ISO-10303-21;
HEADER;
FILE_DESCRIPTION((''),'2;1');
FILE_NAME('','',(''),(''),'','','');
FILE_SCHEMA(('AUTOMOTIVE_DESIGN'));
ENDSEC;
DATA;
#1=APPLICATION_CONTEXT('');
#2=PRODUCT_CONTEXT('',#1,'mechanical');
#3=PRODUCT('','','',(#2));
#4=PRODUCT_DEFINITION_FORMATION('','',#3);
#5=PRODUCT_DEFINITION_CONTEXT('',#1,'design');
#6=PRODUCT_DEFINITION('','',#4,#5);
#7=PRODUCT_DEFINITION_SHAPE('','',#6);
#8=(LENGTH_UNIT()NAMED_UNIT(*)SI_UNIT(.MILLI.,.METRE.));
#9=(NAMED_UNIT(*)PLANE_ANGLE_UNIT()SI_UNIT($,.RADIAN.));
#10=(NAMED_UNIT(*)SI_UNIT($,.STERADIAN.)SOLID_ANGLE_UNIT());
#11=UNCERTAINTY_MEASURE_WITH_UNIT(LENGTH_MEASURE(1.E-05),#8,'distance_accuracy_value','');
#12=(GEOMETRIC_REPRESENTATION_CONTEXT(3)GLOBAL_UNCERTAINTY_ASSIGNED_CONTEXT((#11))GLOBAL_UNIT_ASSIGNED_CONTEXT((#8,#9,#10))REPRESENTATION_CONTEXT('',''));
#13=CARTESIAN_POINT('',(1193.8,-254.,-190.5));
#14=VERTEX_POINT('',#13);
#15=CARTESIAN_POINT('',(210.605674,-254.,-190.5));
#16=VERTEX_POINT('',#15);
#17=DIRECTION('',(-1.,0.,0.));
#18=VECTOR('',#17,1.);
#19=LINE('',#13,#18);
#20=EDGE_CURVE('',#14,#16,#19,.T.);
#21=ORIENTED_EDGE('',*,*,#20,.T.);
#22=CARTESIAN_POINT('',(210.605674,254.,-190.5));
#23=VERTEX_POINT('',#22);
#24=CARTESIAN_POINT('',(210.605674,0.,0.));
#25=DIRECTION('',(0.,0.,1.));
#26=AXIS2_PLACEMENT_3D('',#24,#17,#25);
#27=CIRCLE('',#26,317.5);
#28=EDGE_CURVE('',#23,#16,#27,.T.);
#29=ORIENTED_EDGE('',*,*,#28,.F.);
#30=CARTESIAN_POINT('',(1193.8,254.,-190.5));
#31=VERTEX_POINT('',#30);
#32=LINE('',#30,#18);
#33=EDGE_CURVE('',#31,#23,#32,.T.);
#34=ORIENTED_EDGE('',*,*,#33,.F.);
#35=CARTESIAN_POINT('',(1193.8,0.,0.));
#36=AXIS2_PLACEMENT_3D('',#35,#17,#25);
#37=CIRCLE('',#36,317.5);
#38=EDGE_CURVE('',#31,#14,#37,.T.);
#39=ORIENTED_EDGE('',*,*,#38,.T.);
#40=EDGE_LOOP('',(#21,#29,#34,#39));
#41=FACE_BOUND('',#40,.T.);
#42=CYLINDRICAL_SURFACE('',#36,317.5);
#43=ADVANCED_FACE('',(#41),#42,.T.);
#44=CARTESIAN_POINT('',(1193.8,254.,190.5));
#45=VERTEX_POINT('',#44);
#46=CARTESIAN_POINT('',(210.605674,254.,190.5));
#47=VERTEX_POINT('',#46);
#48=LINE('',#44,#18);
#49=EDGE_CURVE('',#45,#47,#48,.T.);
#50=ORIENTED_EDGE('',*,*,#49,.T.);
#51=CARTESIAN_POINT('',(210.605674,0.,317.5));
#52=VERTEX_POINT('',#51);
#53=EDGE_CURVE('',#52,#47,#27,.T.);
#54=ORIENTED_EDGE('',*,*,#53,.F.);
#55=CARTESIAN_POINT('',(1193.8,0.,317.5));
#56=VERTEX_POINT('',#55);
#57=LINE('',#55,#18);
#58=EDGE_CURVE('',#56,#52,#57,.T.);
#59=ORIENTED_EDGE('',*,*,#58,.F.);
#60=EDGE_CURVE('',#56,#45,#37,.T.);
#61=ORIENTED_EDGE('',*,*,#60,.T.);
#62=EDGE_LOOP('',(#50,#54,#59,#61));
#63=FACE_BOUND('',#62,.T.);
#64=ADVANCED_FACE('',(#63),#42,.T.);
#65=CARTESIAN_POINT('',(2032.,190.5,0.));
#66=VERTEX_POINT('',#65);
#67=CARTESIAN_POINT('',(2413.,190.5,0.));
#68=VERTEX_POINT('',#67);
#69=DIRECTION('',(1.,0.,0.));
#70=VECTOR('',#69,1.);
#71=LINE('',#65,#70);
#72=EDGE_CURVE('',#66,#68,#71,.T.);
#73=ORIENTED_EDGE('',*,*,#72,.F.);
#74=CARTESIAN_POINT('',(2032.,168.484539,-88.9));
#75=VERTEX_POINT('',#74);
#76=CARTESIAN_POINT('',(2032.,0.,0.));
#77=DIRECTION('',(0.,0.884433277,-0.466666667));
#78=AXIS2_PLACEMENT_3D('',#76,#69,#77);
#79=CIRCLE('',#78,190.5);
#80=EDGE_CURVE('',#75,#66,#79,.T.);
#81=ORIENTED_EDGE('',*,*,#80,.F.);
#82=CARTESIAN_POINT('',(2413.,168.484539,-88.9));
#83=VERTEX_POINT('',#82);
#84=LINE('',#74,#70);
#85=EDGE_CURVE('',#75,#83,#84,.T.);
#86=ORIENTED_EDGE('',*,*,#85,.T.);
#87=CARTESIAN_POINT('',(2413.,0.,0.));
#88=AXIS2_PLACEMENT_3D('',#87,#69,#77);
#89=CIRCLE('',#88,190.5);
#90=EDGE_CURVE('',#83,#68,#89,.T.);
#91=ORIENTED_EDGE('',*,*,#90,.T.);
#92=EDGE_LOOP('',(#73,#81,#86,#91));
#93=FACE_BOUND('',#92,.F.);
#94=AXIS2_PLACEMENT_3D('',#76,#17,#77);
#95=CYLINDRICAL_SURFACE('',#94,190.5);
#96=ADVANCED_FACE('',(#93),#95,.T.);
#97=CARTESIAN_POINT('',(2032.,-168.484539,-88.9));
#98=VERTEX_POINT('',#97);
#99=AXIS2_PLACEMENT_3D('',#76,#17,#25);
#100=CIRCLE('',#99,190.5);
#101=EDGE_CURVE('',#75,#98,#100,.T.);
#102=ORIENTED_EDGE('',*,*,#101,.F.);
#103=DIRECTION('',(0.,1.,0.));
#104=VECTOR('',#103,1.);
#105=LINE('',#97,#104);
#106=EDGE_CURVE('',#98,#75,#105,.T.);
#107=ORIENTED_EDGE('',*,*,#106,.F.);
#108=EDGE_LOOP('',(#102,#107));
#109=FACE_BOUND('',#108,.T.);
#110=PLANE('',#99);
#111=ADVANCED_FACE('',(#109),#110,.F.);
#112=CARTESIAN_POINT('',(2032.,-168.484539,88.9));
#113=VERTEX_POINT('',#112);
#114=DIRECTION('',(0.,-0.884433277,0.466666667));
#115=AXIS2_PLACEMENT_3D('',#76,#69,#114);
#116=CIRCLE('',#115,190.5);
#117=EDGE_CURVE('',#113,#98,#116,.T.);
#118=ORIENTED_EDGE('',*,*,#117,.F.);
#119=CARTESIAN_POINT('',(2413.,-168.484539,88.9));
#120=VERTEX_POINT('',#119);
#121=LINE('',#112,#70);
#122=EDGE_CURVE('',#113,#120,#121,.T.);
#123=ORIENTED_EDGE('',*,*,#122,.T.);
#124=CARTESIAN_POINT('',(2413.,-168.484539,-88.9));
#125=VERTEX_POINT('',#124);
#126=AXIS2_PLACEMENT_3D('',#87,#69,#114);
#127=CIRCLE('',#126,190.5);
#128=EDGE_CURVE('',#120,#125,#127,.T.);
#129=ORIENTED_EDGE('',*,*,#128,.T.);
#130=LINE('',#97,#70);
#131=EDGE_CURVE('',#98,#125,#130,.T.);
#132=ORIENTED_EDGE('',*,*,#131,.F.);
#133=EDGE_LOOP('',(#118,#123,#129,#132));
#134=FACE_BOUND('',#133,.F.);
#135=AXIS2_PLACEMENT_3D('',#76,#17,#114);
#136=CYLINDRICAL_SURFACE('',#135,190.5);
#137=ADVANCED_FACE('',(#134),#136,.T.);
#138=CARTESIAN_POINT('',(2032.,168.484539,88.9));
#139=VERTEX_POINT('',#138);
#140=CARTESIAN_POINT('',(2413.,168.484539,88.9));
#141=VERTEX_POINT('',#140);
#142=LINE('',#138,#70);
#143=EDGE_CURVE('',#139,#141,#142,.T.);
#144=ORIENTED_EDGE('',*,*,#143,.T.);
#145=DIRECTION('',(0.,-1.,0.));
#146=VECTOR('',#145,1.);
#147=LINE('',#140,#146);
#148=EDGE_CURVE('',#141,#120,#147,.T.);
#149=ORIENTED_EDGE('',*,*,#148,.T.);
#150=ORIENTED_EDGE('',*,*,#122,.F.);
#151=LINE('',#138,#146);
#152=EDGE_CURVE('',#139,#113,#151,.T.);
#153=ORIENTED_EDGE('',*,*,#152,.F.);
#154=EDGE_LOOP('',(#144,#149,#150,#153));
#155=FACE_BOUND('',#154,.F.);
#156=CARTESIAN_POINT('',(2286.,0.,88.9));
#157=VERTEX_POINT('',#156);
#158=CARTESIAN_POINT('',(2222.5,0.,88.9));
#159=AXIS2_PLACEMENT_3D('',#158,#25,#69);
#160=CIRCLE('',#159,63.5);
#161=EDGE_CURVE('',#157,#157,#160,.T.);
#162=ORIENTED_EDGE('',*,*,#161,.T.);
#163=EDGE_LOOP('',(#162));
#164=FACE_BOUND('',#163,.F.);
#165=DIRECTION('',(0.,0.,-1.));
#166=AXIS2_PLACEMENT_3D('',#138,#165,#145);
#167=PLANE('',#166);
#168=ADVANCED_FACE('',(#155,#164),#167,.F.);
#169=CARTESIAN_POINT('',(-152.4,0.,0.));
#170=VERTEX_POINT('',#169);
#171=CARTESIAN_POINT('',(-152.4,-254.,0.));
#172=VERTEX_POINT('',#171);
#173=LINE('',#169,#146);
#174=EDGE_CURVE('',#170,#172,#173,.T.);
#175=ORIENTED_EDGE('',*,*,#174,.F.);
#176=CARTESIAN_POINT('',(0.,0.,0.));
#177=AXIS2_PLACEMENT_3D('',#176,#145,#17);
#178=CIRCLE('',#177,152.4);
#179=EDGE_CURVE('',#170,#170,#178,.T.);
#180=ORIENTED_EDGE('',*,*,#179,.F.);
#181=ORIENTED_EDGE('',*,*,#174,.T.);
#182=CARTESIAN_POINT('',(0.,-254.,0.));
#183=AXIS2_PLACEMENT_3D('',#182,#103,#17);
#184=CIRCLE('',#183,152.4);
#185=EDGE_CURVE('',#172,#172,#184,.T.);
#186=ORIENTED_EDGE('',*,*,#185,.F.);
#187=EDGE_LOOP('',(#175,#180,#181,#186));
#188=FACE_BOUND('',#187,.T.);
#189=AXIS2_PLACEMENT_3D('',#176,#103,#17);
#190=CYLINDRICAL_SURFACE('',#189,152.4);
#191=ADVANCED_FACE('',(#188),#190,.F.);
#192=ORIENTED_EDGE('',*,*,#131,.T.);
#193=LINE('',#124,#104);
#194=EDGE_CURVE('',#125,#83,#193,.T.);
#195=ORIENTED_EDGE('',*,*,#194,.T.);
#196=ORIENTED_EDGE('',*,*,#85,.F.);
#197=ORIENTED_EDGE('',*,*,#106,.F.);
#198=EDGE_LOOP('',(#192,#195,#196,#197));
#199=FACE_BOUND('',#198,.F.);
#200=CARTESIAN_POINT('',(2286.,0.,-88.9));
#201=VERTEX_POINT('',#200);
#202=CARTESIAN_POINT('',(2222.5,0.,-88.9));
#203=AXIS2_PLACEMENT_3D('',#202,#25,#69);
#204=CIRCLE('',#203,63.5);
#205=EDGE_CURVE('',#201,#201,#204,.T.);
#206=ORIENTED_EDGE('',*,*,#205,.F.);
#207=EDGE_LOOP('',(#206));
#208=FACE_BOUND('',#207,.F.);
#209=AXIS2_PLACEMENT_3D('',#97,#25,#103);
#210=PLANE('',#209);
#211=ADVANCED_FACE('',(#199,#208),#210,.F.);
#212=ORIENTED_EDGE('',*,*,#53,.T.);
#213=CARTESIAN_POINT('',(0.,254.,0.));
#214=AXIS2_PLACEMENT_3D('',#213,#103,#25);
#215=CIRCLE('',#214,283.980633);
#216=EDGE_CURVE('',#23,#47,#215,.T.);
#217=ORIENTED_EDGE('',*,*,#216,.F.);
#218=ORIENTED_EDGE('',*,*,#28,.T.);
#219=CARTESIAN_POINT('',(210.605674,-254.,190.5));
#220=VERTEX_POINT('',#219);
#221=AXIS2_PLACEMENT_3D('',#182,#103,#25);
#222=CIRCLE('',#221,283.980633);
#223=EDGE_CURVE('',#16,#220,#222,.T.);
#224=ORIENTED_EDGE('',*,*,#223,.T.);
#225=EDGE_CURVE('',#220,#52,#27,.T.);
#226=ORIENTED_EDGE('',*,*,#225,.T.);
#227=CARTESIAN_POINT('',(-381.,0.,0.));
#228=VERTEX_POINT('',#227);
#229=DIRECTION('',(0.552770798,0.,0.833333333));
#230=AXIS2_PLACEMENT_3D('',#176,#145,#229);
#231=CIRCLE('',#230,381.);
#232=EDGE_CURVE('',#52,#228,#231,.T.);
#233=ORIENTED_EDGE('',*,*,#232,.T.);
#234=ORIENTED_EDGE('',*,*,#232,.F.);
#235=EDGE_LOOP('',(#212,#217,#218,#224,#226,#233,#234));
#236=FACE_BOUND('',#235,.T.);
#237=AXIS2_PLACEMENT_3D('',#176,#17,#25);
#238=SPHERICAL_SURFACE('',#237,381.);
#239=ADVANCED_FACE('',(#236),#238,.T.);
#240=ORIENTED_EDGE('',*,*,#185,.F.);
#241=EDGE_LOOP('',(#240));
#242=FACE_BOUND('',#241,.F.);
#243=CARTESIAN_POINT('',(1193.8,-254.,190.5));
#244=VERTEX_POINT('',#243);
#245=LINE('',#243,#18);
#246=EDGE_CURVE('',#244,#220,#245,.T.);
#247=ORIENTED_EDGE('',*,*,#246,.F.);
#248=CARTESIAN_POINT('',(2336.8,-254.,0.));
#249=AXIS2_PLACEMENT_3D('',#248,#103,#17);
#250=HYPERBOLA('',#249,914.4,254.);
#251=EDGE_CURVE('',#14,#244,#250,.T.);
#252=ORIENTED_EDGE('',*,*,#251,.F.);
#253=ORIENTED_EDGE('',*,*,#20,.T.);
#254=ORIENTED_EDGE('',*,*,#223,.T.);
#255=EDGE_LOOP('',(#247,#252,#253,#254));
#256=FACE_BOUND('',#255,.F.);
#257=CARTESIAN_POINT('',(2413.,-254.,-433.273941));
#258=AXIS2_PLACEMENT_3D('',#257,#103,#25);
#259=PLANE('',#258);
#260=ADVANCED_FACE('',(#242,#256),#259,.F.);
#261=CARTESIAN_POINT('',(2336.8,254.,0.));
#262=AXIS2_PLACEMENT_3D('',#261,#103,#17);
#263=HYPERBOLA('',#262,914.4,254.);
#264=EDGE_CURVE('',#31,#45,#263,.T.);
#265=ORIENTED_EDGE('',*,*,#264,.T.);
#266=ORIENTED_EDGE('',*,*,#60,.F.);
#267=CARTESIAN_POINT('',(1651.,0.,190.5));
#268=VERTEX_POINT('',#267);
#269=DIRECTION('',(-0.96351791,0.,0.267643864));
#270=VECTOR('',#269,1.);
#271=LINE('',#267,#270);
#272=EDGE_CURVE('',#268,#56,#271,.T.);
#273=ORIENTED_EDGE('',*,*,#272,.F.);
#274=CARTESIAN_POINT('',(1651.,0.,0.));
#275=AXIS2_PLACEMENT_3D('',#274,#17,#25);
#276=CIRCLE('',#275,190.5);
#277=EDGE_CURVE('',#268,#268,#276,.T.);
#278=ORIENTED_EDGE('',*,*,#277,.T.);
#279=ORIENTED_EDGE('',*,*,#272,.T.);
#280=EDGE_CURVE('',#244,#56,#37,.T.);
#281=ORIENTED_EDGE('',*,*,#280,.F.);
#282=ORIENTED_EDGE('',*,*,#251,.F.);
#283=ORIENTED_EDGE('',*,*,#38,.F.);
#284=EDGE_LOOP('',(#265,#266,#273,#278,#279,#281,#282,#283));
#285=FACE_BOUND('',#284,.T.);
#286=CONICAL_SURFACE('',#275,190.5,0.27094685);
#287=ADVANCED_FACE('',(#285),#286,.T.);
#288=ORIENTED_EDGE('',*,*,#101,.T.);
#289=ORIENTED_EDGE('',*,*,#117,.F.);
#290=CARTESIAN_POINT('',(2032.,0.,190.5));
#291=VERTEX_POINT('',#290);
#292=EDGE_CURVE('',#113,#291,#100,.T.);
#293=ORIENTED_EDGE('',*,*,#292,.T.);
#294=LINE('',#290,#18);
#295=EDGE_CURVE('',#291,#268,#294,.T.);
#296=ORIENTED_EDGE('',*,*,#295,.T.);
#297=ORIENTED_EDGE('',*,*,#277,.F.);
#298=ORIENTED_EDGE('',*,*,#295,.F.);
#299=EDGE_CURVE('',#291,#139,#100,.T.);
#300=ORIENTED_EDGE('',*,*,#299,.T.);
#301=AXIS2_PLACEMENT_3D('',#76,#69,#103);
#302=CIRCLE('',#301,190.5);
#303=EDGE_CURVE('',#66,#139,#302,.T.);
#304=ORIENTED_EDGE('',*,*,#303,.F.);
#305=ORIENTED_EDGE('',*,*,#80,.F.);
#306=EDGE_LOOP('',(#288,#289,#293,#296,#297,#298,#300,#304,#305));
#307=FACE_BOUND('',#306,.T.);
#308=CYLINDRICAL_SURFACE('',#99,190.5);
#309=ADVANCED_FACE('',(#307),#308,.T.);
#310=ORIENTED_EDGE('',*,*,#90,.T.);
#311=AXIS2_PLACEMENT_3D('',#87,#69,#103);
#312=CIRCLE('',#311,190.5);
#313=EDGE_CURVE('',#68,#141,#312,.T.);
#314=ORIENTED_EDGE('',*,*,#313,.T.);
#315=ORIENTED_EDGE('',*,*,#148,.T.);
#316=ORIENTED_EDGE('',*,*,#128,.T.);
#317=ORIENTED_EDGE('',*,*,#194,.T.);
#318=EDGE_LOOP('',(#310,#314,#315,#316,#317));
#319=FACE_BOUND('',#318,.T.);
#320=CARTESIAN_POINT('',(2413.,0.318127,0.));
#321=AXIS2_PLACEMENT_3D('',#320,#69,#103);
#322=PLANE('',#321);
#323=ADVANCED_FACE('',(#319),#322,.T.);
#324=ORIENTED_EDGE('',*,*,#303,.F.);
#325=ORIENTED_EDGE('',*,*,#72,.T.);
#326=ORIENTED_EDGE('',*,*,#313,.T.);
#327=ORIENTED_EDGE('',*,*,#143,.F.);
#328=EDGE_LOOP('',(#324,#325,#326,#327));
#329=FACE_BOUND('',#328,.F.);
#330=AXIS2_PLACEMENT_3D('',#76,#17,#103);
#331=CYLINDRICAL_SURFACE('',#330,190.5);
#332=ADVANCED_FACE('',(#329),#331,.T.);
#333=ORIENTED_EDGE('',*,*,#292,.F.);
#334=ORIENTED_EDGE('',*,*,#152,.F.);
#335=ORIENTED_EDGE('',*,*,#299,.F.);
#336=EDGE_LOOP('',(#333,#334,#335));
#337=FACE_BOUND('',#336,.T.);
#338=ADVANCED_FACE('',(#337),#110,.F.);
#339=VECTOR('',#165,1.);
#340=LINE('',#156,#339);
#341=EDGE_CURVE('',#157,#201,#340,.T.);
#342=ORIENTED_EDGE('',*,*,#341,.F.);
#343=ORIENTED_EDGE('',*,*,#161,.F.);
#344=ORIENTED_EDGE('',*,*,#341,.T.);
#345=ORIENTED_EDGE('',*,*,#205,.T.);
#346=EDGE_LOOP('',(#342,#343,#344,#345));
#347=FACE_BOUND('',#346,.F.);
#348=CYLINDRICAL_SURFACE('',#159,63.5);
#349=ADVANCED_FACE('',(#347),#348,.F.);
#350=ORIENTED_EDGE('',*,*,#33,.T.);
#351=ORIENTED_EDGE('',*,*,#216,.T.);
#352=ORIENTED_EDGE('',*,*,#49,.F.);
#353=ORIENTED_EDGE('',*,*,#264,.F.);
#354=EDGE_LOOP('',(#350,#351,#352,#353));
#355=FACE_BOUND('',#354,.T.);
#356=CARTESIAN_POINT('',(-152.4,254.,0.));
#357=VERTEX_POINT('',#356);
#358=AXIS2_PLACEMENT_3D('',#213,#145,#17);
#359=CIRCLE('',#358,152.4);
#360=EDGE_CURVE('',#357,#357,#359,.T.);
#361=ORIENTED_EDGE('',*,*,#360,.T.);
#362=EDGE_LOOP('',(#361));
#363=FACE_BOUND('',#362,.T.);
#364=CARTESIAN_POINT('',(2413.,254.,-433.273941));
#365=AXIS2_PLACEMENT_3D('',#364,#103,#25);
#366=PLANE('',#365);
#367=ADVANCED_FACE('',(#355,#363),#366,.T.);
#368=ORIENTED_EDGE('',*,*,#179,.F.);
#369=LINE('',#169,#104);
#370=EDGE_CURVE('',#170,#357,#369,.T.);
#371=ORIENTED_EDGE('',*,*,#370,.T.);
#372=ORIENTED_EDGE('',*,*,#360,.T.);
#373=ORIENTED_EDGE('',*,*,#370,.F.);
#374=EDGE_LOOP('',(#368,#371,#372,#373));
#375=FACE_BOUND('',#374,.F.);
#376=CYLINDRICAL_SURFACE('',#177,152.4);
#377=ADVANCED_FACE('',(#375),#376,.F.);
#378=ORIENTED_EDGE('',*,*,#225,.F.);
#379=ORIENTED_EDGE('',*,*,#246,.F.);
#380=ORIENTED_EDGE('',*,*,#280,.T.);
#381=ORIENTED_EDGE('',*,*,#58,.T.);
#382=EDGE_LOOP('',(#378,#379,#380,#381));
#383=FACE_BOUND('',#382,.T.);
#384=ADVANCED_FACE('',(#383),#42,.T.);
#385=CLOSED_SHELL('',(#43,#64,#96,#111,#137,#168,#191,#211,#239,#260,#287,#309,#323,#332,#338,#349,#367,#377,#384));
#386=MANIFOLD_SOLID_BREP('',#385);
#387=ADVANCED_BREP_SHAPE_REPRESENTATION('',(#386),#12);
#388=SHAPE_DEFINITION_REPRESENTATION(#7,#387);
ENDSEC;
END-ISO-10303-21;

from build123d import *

# Parameters (mm, degrees)
F3_DEPTH      = 381
F4_R          = 63.5
F5_DEPTH      = 469.901
F6_W          = 139.7
F6_H          = 871.2193071842
F7_DEPTH      = 2794.001
F8_DEPTH      = 254.001
F8_DEPTH_BACK = 254.001


# Not quite as in the source:
# - a feature names something its author has since deleted; it is built from what else it names


with BuildPart() as f1:
    # F0 (on Front) → F1 (revolve)
    with BuildSketch(Plane.XZ):
        with BuildLine():
            ThreePointArc((-152.4, 0), (0, 152.4), (152.4, 0))
            Line((152.4, 0), (2032, 0))
            Line((2032, 0), (2032, 190.5))
            Line((2032, 190.5), (1651, 190.5))
            Line((1651, 190.5), (1193.8, 317.5))
            Line((1193.8, 317.5), (210.6056741876, 317.5))
            ThreePointArc((210.6056741876, 317.5), (-180.1669200138, 335.7095186806), (-381, 0))
            Line((-381, 0), (-152.4, 0))
        make_face()
    revolve(axis=Axis((-190.5, 0, 0), (-1, 0, 0)))

    # F2 (on face) → F3 (join)
    with BuildSketch(Plane.YZ.offset(2032)):
        with BuildLine():
            Line((168.4845393501, 88.9), (-168.4845393501, 88.9))
            ThreePointArc((-168.4845393501, 88.9), (-190.5, 0), (-168.4845393501, -88.9))
            Line((-168.4845393501, -88.9), (168.4845393501, -88.9))
            ThreePointArc((168.4845393501, -88.9), (184.9142432943, -45.792713688), (190.5, 0))
            ThreePointArc((190.5, 0), (184.9142432943, 45.792713688), (168.4845393501, 88.9))
        make_face()
    extrude(amount=F3_DEPTH)

    # F4 (on face) → F5 (cut, through all)
    with BuildSketch(Plane.XY.offset(88.9)):
        with Locations((2222.5, 0)):
            Circle(F4_R)
    extrude(amount=-F5_DEPTH, mode=Mode.SUBTRACT)

    # F6 (on face) → F7 (cut, through all)
    with BuildSketch(Plane.YZ.offset(2413)):
        with Locations((323.85, 2.3357123137)):
            Rectangle(F6_W, F6_H)
        Polygon((-254, -433.2739412785), (-254, 0), (-254, 437.9453659058), (-393.7, 437.9453659058), (-393.7, -433.2739412785), align=None)
    extrude(amount=-F7_DEPTH, mode=Mode.SUBTRACT)

    # F0 (on Front) → F8 (cut, two sides)
    with BuildSketch(Plane.XZ) as f8_sk:
        with BuildLine():
            Line((-152.4, 0), (0, 0))
            Line((0, 0), (152.4, 0))
            ThreePointArc((152.4, 0), (0, 152.4), (-152.4, 0))
        make_face()
        with BuildLine():
            Line((152.4, 0), (0, 0))
            Line((0, 0), (-152.4, 0))
            ThreePointArc((-152.4, 0), (0, -152.4), (152.4, 0))
        make_face()
    extrude(amount=F8_DEPTH, mode=Mode.SUBTRACT)
    extrude(f8_sk.sketch, amount=-F8_DEPTH_BACK, mode=Mode.SUBTRACT)


solid = f1.part
